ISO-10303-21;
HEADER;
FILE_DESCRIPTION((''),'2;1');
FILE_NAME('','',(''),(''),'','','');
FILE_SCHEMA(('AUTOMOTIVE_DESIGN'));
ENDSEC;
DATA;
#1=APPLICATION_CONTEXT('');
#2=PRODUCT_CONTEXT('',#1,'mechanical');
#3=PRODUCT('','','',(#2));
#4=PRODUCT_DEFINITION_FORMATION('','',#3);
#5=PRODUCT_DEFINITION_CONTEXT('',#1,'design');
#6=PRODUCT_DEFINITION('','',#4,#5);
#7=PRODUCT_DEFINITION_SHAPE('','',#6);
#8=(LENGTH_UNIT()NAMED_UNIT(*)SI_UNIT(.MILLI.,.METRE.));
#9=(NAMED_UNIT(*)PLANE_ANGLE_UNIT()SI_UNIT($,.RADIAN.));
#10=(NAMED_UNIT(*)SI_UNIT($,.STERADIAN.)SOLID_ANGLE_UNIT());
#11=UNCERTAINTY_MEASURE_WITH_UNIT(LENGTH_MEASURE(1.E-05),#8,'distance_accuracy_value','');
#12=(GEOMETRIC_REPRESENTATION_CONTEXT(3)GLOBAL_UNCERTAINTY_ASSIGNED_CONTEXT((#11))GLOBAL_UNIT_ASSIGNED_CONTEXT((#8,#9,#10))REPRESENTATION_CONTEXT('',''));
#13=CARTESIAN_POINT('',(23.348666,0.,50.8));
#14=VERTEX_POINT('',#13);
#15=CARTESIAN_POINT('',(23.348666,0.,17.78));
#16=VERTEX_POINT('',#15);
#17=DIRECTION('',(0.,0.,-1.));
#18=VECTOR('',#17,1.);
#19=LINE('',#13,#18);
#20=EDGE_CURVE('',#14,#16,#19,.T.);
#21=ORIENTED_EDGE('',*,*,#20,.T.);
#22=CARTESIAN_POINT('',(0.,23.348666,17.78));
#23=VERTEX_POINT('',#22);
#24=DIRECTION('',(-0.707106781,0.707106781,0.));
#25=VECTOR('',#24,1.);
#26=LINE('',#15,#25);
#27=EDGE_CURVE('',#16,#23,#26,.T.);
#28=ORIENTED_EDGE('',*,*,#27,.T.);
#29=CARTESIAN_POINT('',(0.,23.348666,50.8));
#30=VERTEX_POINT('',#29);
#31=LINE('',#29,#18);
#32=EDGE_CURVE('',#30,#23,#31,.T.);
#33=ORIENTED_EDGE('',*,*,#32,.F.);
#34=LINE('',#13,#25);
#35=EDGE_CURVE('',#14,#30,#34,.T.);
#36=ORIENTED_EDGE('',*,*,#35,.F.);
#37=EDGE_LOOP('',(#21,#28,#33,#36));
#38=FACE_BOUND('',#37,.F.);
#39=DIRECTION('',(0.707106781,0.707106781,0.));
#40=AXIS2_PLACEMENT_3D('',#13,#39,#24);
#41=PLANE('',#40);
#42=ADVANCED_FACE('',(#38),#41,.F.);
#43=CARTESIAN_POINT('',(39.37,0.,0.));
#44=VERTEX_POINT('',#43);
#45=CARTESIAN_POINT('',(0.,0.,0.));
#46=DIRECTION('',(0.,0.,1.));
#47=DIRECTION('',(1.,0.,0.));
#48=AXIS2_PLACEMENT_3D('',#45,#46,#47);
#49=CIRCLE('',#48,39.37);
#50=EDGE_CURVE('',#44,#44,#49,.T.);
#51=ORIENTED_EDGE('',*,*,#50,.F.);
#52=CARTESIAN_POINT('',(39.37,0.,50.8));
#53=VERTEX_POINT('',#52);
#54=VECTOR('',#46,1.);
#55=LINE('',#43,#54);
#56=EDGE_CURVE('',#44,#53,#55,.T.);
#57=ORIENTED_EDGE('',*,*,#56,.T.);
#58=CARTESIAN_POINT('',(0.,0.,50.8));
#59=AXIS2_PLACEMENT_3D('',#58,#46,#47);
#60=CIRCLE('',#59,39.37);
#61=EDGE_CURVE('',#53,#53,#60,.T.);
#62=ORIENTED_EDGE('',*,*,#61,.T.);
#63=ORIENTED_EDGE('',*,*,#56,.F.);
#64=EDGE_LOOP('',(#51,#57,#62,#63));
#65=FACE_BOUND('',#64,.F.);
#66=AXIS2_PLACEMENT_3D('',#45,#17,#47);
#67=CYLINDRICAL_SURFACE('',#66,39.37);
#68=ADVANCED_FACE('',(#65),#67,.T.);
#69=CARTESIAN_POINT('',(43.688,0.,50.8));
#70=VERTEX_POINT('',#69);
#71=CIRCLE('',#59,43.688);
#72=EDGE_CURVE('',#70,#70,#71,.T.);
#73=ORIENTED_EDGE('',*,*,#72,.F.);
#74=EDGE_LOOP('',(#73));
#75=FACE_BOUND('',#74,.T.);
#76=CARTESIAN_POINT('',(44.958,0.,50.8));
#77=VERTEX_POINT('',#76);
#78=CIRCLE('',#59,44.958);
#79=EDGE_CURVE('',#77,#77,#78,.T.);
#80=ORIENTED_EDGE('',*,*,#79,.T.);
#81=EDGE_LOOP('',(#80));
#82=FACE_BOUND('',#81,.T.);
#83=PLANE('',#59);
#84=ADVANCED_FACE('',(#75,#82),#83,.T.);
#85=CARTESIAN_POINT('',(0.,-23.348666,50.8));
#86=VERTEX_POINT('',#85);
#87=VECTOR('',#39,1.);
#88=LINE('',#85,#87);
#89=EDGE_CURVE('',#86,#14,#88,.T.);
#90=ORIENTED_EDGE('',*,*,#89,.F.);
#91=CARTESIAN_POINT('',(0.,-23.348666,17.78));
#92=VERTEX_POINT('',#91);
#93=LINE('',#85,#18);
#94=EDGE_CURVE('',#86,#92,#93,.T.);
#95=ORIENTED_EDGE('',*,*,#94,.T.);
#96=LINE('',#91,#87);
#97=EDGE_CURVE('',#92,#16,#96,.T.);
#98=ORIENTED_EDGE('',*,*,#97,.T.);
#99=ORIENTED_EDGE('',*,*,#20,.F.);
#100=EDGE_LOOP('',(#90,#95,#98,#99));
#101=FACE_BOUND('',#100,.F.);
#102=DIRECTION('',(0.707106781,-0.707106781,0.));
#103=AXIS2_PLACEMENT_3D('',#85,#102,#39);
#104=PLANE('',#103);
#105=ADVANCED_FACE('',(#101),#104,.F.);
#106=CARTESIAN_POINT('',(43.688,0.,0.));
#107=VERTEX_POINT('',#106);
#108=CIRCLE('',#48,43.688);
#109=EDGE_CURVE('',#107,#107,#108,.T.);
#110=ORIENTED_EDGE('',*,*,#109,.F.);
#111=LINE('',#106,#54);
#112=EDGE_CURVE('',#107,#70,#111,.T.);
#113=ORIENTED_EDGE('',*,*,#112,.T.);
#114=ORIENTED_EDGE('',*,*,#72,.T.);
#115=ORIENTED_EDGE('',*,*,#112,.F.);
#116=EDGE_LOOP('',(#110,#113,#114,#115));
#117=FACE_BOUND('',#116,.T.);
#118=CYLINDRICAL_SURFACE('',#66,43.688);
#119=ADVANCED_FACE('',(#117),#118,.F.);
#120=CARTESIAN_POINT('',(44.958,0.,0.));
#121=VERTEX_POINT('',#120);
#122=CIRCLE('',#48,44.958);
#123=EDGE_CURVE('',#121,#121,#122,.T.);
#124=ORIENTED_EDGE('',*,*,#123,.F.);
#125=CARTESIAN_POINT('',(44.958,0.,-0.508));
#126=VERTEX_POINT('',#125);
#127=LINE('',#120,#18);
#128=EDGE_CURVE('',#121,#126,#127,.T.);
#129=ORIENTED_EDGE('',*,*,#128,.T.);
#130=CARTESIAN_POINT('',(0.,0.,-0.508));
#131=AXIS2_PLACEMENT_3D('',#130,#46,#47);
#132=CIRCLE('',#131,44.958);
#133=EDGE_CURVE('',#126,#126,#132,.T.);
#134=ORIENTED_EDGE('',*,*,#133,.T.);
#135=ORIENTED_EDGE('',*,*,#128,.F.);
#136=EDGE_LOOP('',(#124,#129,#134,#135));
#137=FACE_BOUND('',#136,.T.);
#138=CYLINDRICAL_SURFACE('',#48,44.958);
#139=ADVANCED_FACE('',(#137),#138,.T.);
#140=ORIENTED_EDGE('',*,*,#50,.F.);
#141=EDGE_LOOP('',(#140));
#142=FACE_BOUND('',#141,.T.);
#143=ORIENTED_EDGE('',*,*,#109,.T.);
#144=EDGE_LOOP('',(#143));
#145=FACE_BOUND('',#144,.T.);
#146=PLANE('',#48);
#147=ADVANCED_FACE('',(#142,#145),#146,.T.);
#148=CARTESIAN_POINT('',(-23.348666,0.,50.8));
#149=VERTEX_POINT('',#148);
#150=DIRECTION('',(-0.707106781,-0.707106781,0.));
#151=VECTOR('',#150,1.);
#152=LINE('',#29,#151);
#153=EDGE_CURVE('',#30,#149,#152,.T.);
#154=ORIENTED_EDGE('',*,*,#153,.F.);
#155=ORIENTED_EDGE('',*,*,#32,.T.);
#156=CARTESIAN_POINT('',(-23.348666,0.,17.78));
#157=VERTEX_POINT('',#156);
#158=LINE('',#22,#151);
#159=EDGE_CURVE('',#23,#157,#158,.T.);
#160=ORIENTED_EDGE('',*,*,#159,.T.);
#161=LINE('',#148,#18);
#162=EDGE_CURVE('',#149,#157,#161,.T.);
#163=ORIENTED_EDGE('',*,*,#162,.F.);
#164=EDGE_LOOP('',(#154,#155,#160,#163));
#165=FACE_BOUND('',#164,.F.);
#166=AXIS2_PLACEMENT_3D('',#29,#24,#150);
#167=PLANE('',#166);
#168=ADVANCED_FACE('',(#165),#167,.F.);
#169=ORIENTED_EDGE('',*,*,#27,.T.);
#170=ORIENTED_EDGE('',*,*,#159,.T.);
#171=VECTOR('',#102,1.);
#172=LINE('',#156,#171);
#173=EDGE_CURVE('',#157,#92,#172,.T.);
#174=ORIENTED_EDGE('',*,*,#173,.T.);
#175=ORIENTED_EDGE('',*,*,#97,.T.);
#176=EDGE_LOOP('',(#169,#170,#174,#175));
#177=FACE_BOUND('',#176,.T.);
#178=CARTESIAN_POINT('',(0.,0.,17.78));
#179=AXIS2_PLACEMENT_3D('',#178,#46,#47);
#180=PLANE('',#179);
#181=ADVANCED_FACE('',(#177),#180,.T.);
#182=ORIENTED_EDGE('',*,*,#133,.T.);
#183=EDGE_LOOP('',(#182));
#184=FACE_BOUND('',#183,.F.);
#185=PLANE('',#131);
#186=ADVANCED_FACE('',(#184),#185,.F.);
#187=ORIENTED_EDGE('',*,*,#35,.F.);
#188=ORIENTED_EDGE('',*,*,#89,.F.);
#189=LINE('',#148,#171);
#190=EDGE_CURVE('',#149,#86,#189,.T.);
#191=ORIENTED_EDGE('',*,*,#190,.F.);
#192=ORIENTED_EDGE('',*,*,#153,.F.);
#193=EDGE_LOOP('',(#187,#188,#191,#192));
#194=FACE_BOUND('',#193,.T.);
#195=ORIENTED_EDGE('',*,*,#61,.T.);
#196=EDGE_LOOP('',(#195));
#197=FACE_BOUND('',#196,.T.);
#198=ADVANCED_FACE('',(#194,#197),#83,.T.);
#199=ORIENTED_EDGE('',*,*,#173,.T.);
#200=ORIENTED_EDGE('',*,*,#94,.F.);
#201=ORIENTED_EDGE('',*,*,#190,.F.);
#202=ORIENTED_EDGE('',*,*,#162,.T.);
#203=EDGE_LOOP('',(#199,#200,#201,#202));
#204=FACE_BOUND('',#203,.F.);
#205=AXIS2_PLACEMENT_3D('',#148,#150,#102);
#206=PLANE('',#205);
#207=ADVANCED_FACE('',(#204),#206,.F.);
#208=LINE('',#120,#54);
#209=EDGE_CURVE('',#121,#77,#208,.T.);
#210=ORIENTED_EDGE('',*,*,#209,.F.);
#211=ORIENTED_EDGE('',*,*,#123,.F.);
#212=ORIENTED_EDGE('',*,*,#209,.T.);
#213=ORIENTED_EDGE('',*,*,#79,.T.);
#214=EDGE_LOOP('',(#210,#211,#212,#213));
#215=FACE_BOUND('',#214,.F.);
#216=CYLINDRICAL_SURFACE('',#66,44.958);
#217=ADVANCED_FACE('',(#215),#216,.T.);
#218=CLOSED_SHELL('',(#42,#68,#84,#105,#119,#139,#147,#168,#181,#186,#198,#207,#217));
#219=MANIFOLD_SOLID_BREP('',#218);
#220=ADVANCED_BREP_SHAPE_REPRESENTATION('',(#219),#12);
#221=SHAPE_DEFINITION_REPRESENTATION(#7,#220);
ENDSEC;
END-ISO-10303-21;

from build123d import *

# Parameters (mm, degrees)
F2_R     = 44.958
F3_DEPTH = 0.508
F4_R     = 39.37
F5_DEPTH = 50.8
F7_DEPTH = 33.02
F8_R     = 44.958
F8_R_2   = 43.688
F9_DEPTH = 50.8


# Not quite as in the source:
# - the program builds the solid bodies; features that only make, move or delete a surface that nothing else refers to are left out


with BuildPart() as f3:
    # F2 (on Top) → F3 (new body)
    with BuildSketch(Plane.XY):
        Circle(F2_R)
    extrude(amount=-F3_DEPTH)

    # F4 (on Top) → F5 (join)
    with BuildSketch(Plane.XY):
        Circle(F4_R)
    extrude(amount=F5_DEPTH)

    # F6 (on face) → F7 (cut)
    with BuildSketch(Plane.XY.offset(50.8)):
        Polygon((23.3486659148, 0), (0, 23.3486659148), (-23.3486659148, 0), (0, -23.3486659148), align=None)
    extrude(amount=-F7_DEPTH, mode=Mode.SUBTRACT)

    # F8 (on Top) → F9 (join)
    with BuildSketch(Plane.XY):
        Circle(F8_R)
        Circle(F8_R_2, mode=Mode.SUBTRACT)
    extrude(amount=F9_DEPTH)


solid = f3.part
